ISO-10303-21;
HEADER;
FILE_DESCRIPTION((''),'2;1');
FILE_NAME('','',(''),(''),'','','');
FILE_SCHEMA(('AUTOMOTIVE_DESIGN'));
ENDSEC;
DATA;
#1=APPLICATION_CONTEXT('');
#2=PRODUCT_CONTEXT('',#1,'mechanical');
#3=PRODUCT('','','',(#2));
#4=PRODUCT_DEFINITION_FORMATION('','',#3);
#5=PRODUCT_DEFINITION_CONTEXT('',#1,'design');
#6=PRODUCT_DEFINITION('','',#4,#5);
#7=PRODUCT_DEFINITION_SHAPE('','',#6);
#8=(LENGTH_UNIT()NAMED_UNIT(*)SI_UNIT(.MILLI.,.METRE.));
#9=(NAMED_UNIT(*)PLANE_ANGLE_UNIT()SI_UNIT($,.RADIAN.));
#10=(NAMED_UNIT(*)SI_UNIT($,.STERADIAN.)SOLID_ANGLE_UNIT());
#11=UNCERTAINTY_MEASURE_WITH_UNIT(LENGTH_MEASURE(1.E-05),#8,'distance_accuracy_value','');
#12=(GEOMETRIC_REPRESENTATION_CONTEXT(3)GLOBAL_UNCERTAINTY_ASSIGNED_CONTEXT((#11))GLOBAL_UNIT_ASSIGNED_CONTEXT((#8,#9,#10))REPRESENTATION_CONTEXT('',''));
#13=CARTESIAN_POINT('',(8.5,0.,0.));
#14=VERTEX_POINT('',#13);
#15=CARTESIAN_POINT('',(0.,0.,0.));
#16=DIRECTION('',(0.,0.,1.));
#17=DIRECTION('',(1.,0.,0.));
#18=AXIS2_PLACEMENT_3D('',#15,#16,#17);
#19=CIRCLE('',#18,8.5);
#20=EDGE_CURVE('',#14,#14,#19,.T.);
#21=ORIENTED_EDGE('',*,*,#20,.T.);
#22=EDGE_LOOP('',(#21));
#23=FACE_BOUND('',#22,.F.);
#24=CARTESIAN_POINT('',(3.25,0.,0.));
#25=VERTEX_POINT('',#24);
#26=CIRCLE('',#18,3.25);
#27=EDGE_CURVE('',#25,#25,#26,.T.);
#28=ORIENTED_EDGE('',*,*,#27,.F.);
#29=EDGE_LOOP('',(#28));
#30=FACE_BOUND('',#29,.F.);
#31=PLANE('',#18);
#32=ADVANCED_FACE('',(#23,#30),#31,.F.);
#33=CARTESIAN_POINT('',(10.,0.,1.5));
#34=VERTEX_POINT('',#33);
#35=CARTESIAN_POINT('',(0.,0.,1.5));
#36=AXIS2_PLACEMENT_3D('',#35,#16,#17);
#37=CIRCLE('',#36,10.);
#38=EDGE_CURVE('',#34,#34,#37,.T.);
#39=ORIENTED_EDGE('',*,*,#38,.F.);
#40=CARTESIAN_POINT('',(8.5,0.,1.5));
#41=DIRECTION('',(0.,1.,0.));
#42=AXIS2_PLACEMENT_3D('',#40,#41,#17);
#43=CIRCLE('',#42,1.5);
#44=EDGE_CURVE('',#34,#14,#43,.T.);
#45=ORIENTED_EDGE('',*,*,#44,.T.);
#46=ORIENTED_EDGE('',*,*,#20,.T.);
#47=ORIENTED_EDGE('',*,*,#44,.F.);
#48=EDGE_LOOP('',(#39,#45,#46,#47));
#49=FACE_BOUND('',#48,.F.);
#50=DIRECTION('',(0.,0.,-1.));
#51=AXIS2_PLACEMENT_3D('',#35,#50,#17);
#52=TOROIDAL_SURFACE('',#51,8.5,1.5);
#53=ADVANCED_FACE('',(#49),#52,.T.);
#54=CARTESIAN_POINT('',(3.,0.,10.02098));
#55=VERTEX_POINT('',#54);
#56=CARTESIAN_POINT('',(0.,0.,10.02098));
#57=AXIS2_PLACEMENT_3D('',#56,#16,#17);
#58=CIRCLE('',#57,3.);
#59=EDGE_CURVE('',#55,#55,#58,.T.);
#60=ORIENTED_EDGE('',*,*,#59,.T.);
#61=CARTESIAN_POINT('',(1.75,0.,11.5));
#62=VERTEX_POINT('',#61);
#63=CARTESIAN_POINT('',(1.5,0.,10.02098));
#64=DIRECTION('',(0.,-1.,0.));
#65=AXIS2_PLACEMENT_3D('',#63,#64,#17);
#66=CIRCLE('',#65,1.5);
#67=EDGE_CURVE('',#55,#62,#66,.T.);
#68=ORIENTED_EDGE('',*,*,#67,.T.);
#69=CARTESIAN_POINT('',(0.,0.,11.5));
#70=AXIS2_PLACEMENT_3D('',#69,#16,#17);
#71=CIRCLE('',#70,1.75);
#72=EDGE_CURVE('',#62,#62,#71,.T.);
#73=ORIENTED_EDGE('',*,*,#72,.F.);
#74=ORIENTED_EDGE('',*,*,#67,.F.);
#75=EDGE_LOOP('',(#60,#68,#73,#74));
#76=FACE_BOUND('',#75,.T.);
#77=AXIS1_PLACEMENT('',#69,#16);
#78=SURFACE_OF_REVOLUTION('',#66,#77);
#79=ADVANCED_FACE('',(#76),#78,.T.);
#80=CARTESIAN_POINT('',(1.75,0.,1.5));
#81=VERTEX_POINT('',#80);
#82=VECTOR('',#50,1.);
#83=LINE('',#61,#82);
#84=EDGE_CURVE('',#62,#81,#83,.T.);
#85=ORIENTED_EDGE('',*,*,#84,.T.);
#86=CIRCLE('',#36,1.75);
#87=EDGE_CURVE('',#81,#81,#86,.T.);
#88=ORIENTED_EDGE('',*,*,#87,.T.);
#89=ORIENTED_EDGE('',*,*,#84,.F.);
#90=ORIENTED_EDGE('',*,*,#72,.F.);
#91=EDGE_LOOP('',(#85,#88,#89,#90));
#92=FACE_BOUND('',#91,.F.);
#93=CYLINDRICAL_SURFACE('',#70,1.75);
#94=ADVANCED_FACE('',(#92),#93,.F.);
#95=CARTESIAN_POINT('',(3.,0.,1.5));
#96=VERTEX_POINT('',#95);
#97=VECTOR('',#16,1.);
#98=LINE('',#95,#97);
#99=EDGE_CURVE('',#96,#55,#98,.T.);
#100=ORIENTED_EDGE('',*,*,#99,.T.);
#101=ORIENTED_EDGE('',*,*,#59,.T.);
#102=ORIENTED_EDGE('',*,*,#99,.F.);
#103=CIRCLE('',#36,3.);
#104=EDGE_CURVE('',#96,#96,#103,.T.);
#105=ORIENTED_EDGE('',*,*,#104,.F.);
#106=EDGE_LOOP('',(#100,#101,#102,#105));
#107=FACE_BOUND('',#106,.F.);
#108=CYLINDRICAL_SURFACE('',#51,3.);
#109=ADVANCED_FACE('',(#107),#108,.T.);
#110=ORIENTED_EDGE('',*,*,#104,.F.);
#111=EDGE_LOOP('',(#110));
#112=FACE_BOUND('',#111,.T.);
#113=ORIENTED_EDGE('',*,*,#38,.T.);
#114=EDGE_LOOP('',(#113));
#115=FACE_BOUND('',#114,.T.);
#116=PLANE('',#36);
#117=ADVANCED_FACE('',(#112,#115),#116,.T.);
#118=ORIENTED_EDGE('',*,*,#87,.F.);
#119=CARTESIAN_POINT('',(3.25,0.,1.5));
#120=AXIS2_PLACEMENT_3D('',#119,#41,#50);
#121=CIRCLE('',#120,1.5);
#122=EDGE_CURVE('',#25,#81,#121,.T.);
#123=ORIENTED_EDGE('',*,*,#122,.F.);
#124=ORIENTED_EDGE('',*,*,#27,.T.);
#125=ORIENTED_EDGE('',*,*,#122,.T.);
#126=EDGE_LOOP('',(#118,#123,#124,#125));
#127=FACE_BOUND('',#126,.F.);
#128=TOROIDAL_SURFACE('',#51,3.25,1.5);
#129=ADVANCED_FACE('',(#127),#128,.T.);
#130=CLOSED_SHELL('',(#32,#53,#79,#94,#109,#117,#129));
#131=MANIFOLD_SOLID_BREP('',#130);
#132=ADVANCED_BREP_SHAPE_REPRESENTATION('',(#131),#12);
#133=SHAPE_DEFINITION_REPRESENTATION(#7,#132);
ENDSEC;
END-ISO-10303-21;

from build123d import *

# Parameters (mm, degrees)
F0_R     = 10
F1_DEPTH = 1.5
F2_R     = 3
F3_DEPTH = 10
F4_R     = 1.75
F5_DEPTH = 11.501


# Not quite as in the source:
# - a fillet or chamfer that OpenCascade refuses, or shapes differently, is made with other operations: its cross-section is extruded or revolved along the edge and cut away or added


with BuildPart() as f1:
    # F0 (on Top) → F1 (new body)
    with BuildSketch(Plane.XY):
        Circle(F0_R)
    extrude(amount=F1_DEPTH)

    # F2 (on face) → F3 (join)
    with BuildSketch(Plane.XY.offset(1.5)):
        Circle(F2_R)
    extrude(amount=F3_DEPTH)

    # F4 (on face) → F5 (cut, through all)
    with BuildSketch(Plane.XY.offset(11.5)):
        Circle(F4_R)
    extrude(amount=-F5_DEPTH, mode=Mode.SUBTRACT)

    # F6: fillet of radius 1.5 on 3 edges, made by hand

    # F6_s1 → F6_t2 (revolve, cut)
    with BuildSketch(Plane.XZ):
        with BuildLine():
            ThreePointArc((10, 1.5), (9.5606601718, 0.4393398282), (8.5, 0))
            Line((8.5, 0), (10, 0))
            Line((10, 0), (10, 1.5))
        make_face()
    revolve(axis=Axis((0, 0, 0), (0, 0, 1)), mode=Mode.SUBTRACT)

    # F6_s3 → F6_t4 (revolve, cut)
    with BuildSketch(Plane.XZ):
        with BuildLine():
            ThreePointArc((3.25, 0), (2.1893398282, 0.4393398282), (1.75, 1.5))
            Line((1.75, 1.5), (1.75, 0))
            Line((1.75, 0), (3.25, 0))
        make_face()
    revolve(axis=Axis((0, 0, 0), (0, 0, 1)), mode=Mode.SUBTRACT)

    # F6_s5 → F6_t6 (revolve, cut)
    with BuildSketch(Plane.XZ):
        with BuildLine():
            ThreePointArc((3, 10.0209800542), (2.6456439237, 10.9892258908), (1.75, 11.5))
            Line((1.75, 11.5), (3, 11.5))
            Line((3, 11.5), (3, 10.0209800542))
        make_face()
    revolve(axis=Axis((0, 0, 11.5), (0, 0, 1)), mode=Mode.SUBTRACT)


solid = f1.part
